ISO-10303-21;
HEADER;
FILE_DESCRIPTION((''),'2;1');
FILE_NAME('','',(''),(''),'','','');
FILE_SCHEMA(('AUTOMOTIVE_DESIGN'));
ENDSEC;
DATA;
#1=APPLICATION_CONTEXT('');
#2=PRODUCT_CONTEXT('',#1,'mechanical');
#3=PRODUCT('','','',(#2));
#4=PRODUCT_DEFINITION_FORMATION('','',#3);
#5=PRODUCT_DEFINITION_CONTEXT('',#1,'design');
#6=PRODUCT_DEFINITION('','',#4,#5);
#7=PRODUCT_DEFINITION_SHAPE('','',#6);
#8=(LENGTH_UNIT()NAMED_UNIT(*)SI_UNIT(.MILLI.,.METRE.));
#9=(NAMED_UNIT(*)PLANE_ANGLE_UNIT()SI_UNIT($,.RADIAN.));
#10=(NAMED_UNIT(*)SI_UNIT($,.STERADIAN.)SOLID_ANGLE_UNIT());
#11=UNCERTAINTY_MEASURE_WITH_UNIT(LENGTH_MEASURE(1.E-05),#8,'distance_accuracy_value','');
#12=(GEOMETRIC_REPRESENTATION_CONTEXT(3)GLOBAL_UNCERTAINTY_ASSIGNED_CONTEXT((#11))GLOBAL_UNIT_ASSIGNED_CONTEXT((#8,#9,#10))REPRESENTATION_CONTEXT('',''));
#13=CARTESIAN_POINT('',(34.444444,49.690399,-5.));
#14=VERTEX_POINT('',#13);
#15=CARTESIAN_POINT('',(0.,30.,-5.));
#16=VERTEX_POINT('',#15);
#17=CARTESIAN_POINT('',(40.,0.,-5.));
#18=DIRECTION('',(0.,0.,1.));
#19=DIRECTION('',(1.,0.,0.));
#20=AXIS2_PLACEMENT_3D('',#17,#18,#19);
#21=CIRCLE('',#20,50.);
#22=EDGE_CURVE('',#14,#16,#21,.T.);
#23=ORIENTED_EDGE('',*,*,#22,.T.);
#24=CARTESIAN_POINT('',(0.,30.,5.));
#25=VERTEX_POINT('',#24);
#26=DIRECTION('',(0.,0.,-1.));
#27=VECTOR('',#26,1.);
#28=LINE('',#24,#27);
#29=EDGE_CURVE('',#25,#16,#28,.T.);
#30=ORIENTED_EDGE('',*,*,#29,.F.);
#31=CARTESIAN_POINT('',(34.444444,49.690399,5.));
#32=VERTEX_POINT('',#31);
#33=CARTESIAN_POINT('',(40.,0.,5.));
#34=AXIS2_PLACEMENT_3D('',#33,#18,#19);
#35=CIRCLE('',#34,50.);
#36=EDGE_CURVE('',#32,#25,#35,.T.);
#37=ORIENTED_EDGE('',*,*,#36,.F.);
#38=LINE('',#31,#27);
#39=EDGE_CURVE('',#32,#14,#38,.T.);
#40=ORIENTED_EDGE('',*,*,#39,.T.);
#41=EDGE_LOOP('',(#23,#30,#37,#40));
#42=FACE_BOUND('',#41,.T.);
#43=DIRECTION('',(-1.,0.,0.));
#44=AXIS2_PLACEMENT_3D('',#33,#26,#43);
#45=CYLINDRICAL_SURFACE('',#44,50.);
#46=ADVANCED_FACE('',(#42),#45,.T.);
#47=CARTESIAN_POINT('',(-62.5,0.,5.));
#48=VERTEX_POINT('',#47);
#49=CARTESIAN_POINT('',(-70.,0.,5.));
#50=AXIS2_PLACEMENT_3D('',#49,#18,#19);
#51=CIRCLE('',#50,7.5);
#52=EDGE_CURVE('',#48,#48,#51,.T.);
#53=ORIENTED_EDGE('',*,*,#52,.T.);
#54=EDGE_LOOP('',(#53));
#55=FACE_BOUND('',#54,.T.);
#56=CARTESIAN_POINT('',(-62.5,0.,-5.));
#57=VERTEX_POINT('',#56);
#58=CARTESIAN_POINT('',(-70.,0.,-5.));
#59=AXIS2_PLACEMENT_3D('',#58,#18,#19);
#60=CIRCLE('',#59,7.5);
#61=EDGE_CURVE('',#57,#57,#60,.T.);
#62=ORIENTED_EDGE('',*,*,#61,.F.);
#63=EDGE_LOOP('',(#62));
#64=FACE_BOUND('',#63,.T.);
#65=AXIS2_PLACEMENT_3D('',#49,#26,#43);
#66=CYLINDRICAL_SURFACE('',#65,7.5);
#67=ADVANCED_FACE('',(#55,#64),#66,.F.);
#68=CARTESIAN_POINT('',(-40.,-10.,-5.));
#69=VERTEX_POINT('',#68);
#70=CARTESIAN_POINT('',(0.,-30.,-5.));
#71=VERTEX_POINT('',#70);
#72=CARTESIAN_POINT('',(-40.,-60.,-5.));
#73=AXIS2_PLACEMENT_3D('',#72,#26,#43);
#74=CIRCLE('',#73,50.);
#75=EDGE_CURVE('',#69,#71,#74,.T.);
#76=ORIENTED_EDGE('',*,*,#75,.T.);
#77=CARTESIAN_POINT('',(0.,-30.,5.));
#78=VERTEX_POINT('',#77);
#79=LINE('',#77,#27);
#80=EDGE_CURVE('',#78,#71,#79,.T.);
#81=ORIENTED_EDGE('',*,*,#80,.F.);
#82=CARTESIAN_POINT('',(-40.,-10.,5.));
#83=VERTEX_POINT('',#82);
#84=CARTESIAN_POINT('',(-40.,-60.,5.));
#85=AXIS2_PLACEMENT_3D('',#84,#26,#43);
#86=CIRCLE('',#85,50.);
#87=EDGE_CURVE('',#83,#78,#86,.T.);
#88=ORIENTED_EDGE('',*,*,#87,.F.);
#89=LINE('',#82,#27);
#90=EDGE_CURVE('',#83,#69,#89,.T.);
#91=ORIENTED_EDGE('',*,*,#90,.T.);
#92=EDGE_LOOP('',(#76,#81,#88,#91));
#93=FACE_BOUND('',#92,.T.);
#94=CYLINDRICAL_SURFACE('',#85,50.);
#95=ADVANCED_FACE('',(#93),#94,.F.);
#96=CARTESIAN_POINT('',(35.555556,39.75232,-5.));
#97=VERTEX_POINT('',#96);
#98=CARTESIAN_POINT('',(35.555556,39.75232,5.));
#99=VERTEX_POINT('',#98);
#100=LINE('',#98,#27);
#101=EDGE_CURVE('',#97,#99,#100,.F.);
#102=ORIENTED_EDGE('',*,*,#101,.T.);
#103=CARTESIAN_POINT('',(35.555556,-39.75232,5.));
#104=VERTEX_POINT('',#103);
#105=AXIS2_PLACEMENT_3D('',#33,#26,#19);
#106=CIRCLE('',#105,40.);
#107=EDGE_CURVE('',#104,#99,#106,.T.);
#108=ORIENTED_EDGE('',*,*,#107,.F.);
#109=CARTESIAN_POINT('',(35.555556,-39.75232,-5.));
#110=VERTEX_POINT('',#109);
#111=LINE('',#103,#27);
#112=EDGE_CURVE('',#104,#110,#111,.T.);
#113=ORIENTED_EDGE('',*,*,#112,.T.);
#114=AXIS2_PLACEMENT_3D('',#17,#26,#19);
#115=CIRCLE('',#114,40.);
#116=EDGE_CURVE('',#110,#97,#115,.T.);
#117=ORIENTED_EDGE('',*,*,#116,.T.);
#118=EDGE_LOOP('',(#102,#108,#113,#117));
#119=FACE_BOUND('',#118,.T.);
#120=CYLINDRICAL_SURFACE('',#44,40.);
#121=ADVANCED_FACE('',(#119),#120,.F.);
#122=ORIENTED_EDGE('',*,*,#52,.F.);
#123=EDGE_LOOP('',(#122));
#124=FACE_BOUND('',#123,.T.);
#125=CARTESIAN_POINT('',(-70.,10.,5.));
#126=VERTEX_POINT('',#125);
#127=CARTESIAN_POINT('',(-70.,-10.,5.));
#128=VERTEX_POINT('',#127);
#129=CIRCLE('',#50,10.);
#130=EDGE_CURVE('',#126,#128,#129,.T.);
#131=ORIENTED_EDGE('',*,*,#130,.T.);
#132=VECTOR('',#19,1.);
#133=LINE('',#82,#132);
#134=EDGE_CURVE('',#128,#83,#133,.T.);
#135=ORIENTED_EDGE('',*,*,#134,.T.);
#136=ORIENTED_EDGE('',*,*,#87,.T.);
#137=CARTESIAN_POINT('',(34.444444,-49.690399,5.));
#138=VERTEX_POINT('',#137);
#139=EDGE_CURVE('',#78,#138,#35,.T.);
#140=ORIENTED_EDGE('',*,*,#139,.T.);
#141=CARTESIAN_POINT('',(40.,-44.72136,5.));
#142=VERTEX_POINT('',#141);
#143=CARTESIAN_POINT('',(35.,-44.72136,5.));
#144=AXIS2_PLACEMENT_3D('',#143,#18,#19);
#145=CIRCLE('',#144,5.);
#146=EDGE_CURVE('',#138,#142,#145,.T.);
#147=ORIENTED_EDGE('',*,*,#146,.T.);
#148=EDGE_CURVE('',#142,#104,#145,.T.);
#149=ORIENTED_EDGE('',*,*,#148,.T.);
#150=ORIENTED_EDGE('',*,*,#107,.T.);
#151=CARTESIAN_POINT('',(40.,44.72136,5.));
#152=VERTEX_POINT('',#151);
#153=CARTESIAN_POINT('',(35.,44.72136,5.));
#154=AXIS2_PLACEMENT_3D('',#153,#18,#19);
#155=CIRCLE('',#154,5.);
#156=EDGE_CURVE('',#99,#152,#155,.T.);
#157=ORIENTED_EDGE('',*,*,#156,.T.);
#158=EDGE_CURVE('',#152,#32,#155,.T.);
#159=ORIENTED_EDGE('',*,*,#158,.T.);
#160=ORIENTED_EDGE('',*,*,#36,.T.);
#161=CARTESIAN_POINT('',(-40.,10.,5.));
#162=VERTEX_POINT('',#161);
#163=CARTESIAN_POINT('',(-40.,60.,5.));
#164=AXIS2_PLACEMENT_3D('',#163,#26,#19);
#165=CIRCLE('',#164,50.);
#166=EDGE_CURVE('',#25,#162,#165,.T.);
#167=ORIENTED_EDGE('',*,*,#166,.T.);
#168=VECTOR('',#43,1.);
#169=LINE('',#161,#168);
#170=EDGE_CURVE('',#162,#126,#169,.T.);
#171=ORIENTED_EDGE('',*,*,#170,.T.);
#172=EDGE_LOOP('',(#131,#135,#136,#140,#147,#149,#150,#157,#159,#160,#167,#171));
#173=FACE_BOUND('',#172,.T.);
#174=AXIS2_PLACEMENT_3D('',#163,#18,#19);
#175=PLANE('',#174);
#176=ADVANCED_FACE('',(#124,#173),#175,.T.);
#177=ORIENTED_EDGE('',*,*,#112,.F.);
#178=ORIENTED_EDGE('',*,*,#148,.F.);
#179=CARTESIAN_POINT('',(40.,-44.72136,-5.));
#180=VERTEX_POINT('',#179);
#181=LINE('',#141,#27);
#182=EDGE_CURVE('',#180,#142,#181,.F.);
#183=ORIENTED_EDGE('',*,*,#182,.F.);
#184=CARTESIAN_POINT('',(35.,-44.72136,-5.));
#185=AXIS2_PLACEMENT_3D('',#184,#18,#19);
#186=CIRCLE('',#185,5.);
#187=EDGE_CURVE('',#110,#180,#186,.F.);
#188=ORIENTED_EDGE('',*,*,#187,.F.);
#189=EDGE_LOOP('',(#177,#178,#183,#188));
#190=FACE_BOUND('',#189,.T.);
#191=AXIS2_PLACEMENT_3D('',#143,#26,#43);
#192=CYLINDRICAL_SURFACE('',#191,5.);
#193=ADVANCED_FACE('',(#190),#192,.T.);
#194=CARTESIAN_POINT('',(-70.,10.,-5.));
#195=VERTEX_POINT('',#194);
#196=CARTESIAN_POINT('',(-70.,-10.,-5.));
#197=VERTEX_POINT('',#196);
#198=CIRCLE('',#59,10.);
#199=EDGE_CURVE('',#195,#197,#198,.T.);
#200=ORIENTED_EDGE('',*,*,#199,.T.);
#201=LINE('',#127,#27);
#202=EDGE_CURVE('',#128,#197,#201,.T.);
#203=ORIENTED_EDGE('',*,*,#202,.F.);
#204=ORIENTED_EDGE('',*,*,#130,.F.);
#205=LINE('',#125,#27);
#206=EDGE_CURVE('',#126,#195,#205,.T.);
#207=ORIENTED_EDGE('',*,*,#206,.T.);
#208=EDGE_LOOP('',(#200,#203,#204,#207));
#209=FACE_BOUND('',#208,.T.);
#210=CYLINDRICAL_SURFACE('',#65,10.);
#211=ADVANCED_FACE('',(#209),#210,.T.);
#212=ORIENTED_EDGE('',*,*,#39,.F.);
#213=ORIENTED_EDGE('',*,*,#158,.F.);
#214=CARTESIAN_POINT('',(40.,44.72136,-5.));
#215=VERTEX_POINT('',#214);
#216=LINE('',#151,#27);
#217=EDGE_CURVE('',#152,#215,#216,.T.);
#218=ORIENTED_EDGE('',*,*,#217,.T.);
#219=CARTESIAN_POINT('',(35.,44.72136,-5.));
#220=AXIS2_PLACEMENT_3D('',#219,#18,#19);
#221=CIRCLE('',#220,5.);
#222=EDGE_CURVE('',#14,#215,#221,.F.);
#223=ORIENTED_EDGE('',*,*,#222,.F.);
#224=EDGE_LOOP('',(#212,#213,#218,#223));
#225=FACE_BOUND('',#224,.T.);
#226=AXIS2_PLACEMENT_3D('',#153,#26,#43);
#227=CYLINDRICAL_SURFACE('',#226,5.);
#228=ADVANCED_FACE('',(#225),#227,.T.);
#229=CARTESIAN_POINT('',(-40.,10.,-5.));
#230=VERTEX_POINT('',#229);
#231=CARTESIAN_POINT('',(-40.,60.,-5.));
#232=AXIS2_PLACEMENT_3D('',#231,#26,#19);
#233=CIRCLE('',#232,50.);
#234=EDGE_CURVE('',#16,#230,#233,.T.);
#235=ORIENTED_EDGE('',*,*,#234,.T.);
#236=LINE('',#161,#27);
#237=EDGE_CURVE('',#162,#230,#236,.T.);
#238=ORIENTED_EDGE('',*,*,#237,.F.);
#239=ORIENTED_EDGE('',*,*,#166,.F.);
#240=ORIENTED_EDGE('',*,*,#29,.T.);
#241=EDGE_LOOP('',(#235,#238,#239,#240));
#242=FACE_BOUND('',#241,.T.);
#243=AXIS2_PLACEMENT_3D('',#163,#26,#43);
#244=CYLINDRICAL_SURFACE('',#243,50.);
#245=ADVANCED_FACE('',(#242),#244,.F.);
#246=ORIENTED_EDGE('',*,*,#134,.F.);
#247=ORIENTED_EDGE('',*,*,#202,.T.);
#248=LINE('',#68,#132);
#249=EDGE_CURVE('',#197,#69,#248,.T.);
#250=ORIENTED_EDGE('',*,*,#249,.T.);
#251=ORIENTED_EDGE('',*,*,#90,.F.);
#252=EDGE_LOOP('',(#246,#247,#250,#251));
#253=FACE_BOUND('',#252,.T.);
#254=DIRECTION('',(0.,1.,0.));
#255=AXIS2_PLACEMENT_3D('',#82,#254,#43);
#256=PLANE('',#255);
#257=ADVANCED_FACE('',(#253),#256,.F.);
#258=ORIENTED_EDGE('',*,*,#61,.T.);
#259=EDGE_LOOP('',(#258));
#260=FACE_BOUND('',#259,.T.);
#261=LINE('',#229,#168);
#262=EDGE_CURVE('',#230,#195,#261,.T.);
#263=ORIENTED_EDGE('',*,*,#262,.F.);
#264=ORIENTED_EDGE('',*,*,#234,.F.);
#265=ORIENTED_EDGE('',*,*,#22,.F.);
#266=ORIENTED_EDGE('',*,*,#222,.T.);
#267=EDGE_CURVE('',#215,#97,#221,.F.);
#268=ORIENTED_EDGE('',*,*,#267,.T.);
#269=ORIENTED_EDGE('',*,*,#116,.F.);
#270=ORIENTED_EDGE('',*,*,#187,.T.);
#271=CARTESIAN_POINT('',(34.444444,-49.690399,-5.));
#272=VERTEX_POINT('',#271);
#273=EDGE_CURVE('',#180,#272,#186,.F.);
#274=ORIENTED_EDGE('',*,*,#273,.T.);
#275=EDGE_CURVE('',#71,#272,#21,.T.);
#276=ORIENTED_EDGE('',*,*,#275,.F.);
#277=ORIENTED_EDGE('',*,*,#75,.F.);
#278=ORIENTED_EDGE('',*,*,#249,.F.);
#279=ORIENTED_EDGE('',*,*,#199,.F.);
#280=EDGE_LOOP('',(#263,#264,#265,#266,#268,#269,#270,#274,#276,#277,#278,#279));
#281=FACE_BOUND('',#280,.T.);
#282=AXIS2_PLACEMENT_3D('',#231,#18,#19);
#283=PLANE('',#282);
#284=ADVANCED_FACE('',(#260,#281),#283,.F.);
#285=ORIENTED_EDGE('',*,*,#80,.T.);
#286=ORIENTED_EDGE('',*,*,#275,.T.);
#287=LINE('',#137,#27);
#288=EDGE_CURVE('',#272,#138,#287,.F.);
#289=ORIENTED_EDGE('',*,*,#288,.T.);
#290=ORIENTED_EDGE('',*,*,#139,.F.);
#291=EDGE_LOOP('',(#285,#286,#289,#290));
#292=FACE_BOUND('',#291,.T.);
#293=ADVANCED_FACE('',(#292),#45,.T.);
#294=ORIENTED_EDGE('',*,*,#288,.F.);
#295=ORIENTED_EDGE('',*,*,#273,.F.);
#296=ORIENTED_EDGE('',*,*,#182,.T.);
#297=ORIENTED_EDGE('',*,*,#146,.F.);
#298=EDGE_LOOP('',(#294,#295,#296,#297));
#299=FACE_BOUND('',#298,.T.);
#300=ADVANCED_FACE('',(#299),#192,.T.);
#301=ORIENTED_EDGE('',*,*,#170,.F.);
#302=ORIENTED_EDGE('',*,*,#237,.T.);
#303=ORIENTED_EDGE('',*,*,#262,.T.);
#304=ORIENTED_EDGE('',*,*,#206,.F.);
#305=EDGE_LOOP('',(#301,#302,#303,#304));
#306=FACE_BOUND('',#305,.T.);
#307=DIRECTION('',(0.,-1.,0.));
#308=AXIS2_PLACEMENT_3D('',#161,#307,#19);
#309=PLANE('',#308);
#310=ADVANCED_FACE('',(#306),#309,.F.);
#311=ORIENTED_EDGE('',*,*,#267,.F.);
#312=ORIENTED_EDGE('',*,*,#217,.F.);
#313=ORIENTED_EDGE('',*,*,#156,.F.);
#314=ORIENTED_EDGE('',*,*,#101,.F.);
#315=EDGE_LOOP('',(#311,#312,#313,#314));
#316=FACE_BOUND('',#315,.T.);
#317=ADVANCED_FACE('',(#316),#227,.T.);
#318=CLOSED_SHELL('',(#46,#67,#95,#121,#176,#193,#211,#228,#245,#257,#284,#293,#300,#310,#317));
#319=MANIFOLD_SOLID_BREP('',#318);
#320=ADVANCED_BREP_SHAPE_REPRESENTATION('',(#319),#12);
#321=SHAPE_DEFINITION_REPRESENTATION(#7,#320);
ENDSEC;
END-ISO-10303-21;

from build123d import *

# Parameters (mm, degrees)
SKETCH1_R           = 7.5
BOSS_EXTRUDE1_DEPTH = 5
FILLET2_R           = 5


with BuildPart() as part:
    # Sketch1 → Boss-Extrude1 (new, symmetric)
    with BuildSketch(Plane.XY):
        with BuildLine():
            Line((40, -50), (40, -40))
            ThreePointArc((40, -40), (0, 0), (40, 40))
            Line((40, 40), (40, 50))
            ThreePointArc((40, 50), (17.639320225, 44.72135955), (0, 30))
            ThreePointArc((0, 30), (-17.639320225, 15.27864045), (-40, 10))
            Line((-40, 10), (-70, 10))
            ThreePointArc((-70, 10), (-80, 0), (-70, -10))
            Line((-70, -10), (-40, -10))
            ThreePointArc((-40, -10), (-17.639320225, -15.27864045), (0, -30))
            ThreePointArc((0, -30), (17.639320225, -44.72135955), (40, -50))
        make_face()
        with Locations((-70, 0)):
            Circle(SKETCH1_R, mode=Mode.SUBTRACT)
    extrude(amount=BOSS_EXTRUDE1_DEPTH, both=True)

    # Fillet2
    fillet2_edges = [part.edges().sort_by_distance(p)[0] for p in [
        (40, -50, 0),
        (40, -40, 0),
        (40, 50, 0),
        (40, 40, 0),
    ]]
    fillet(fillet2_edges, radius=FILLET2_R - 0.0001)  # a hair under: the kernel refuses the full size


solid = part.part
